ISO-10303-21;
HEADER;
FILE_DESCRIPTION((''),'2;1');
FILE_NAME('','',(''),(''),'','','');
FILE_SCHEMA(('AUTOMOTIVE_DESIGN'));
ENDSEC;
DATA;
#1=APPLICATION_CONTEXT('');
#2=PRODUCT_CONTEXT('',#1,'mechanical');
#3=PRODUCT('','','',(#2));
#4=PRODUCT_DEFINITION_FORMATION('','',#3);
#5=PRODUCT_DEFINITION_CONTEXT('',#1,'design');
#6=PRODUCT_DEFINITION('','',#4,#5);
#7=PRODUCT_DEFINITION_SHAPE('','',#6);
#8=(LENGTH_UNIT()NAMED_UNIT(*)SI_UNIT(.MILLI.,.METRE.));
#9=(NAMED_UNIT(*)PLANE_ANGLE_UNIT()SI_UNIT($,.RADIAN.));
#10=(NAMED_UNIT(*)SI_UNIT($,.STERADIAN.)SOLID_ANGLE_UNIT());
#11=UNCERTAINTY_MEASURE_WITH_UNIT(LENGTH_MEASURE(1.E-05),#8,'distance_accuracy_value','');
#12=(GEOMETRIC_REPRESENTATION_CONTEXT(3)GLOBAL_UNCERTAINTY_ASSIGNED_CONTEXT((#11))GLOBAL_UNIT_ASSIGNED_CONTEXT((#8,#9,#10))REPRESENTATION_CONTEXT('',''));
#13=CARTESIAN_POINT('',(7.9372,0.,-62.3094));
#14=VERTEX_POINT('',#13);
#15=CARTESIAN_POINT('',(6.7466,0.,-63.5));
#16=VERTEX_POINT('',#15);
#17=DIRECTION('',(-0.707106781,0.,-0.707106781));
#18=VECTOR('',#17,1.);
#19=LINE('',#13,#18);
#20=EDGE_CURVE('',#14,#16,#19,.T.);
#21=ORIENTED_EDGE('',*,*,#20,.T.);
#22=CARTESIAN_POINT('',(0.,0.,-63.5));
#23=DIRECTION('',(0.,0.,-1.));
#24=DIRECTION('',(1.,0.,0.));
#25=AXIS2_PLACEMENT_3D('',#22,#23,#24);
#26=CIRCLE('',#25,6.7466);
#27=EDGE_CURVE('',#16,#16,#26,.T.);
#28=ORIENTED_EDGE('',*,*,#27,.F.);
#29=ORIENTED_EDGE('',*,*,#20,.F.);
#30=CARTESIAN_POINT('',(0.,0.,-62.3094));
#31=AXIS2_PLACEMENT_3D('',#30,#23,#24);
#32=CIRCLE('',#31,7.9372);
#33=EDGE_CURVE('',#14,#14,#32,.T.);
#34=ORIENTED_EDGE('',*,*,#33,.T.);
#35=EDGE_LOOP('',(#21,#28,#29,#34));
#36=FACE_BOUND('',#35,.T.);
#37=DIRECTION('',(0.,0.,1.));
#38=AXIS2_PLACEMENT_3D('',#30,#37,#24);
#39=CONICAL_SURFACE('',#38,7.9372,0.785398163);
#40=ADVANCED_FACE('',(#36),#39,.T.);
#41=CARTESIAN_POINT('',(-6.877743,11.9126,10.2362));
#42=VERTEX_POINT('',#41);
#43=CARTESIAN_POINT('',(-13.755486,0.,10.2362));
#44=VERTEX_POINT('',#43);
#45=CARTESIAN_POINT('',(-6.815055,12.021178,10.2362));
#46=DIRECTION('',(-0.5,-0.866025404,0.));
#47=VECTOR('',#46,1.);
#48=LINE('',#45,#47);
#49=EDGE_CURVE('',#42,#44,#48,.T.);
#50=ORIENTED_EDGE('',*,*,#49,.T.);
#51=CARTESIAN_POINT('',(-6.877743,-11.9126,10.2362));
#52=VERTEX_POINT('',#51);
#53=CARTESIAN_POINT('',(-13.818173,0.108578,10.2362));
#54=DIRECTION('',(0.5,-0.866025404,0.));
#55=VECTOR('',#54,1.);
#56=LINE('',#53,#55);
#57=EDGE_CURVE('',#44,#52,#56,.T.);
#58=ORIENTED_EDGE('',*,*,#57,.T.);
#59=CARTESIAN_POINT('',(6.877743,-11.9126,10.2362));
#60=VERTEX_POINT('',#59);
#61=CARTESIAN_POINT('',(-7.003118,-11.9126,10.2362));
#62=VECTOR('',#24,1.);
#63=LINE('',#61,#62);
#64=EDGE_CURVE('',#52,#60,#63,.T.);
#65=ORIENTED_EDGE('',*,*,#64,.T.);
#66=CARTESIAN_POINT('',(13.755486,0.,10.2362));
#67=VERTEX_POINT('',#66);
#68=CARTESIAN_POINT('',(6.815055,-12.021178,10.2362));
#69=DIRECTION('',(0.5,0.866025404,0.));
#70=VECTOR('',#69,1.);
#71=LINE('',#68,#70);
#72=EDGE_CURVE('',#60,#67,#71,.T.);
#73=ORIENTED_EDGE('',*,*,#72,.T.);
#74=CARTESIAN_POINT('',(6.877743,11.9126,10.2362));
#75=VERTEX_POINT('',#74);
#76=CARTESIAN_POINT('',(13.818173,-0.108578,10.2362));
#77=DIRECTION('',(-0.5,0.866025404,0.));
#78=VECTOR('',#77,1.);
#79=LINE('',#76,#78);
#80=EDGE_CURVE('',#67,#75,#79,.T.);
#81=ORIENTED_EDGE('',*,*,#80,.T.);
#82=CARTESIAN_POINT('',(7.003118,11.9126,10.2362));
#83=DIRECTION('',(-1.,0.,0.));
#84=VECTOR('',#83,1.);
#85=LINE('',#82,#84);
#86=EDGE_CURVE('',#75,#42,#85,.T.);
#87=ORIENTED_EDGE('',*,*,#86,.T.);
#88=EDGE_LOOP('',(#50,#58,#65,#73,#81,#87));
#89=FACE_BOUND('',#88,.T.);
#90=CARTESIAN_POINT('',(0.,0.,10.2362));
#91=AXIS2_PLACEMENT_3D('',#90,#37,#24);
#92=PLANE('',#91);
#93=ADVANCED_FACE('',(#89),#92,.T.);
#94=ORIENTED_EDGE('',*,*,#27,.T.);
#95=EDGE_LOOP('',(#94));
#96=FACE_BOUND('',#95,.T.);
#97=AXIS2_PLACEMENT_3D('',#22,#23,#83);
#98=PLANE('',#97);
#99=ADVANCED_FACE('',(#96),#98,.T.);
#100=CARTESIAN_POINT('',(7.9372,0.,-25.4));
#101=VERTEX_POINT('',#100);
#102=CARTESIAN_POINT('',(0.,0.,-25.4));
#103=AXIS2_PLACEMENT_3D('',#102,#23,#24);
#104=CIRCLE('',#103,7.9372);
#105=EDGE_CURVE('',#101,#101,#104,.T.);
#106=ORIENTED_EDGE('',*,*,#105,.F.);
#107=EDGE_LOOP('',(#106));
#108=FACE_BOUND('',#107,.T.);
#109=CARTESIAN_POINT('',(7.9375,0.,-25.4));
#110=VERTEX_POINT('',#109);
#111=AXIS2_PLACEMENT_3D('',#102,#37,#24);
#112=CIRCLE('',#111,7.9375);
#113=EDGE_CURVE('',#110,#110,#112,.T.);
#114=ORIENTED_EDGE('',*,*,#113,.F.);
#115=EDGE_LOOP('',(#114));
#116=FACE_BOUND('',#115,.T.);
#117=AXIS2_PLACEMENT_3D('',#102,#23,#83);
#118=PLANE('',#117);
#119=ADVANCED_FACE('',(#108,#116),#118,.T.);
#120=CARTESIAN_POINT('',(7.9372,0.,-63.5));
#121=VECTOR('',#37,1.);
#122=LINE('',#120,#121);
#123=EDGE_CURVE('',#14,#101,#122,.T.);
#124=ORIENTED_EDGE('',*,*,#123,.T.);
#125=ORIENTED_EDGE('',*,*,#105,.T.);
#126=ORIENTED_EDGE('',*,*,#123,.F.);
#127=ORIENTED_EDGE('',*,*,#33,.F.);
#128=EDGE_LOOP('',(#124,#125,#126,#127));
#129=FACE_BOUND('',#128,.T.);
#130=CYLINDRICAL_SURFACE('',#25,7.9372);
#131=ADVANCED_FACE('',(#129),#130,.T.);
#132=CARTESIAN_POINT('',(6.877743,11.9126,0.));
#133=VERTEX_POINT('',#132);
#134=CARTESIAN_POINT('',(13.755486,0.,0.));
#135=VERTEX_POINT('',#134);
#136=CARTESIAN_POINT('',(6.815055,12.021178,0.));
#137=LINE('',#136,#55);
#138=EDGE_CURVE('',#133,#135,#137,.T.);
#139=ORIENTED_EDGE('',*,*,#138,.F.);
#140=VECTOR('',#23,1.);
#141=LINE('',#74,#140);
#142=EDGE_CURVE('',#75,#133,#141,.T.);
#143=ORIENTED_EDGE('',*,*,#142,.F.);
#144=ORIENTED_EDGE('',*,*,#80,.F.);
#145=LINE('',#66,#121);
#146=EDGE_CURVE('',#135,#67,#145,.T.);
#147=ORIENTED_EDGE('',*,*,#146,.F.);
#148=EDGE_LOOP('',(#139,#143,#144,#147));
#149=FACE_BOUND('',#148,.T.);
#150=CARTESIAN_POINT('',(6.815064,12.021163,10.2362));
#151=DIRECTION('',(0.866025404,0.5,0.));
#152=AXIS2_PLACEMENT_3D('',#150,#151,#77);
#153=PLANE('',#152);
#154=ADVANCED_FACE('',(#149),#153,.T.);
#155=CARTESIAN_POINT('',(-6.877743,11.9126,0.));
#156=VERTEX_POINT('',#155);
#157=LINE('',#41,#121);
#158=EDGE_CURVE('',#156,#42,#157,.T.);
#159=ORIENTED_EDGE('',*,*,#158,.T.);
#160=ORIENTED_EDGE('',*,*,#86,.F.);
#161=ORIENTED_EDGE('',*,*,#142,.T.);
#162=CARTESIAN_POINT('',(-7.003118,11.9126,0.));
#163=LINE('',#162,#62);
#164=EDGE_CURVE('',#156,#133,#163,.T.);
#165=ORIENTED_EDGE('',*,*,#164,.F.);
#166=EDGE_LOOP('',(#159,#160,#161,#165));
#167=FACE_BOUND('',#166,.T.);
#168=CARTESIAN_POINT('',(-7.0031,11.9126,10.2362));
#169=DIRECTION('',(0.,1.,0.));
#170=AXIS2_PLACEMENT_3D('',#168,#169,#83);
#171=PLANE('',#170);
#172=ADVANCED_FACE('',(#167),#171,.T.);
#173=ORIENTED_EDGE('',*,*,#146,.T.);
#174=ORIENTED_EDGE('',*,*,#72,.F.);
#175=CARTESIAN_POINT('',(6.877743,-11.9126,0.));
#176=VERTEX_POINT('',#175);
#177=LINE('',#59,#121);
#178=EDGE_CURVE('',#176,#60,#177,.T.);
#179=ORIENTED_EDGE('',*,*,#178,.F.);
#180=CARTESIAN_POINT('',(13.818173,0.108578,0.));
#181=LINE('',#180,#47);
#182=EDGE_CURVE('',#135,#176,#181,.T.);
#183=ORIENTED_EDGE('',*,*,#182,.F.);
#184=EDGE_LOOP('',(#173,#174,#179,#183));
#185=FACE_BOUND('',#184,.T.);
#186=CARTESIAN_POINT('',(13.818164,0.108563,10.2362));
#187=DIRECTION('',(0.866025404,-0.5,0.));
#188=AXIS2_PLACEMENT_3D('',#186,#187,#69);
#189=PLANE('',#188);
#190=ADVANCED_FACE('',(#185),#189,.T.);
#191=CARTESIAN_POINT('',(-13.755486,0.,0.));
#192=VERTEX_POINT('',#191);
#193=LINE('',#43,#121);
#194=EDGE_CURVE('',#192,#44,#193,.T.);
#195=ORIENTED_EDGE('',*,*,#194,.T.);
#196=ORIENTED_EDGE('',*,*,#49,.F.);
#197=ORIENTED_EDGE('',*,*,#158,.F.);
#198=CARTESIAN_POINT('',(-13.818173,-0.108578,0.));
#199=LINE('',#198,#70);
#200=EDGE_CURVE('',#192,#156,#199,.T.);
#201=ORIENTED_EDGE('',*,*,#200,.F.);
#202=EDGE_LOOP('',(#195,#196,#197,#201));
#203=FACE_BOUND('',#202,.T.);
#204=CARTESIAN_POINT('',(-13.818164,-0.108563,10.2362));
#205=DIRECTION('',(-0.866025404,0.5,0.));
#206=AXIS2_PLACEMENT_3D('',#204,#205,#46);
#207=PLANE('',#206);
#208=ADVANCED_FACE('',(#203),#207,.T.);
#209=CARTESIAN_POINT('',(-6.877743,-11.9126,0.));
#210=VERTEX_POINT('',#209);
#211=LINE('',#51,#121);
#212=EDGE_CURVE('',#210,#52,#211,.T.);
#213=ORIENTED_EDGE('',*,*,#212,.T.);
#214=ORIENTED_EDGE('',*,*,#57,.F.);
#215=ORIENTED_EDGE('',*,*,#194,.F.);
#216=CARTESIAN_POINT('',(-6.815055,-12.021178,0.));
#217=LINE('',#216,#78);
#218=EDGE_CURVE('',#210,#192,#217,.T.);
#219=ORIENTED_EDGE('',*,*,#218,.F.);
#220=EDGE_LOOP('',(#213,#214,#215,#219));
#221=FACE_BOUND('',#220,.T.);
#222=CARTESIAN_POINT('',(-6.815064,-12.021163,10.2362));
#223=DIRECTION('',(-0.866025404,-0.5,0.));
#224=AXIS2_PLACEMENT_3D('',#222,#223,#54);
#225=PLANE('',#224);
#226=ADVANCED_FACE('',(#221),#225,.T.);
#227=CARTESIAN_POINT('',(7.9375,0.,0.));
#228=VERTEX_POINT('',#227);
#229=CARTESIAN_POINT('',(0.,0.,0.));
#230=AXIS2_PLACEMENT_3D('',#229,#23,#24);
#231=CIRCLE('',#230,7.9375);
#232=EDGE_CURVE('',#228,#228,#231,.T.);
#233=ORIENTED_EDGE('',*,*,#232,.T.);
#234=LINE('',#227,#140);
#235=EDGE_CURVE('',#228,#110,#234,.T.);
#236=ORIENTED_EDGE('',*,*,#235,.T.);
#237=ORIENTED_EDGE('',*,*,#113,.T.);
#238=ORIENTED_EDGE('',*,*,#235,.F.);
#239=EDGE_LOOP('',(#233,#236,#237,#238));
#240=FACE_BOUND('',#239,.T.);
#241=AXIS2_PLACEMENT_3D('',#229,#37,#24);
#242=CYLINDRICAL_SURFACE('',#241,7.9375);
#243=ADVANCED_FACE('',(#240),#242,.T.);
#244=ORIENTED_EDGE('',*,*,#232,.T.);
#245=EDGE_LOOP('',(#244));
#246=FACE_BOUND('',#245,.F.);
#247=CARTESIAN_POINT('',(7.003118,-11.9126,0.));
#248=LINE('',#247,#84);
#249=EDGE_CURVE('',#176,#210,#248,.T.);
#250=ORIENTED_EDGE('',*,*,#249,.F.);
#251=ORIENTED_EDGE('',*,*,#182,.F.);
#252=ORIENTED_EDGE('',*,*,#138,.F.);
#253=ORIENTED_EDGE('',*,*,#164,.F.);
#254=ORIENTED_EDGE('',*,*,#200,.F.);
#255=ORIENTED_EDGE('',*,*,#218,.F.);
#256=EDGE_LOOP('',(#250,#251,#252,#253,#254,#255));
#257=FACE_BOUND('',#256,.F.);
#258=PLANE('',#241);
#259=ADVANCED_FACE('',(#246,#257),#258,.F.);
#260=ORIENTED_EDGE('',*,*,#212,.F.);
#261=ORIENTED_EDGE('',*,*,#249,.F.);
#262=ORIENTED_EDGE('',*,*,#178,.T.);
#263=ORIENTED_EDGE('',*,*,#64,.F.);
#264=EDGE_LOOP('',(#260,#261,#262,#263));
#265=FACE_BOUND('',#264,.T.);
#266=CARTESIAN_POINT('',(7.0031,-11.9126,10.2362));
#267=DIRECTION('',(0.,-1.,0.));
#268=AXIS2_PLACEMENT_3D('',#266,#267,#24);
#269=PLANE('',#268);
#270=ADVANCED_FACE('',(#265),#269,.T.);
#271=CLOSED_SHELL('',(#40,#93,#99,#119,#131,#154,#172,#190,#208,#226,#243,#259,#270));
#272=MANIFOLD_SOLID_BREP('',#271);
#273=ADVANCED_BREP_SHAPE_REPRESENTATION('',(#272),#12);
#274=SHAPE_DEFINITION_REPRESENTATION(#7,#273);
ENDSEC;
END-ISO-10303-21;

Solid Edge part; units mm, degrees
sketch "Sketch1" plane through (0, 0, 0) normal (0, 0, 1) x (1, 0, 0)
  circle A0 centre (0, 0) radius 13.8186
  dimension "D1" = 27.6372
extrude "Protrusion1" add sketch "Sketch1" along normal blind 10.2362
sketch "Sketch2" plane through (0, 0, 0) normal (0, 0, -1) x (1, 0, 0)
  circle A0 centre (0, 0) radius 7.9375
extrude "Protrusion2" add sketch "Sketch2" along normal blind 63.5
sketch "Sketch3" plane through (0, 0, -63.5) normal (0, 0, -1) x (1, 0, 0)
  circle A0 centre (0, 0) radius 7.9372
extrude "Cutout1" cut sketch "Sketch3" against normal blind 38.1 flip side to cut
chamfer "Chamfer_1" distance 1.1906 angle 45 1 edges at (-7.9372, 0, -63.5)
sketch "Sketch4" plane through (0, 0, 10.2362) normal (0, 0, 1) x (1, 0, 0)
  line L0 (-7.0031, 11.9126) -> (7.0031, 11.9126)
  dimension "D1" = 23.8252
extrude "Cutout2" cut sketch "Sketch4" against normal up to next material side at (0, 11.9626, 10.2362)
pattern_circular "Pattern1" count 6 over 360 about axis through (0, 0, 10.2362) along (0, 0, 1) of "Cutout2"
properties part number "24102410"
